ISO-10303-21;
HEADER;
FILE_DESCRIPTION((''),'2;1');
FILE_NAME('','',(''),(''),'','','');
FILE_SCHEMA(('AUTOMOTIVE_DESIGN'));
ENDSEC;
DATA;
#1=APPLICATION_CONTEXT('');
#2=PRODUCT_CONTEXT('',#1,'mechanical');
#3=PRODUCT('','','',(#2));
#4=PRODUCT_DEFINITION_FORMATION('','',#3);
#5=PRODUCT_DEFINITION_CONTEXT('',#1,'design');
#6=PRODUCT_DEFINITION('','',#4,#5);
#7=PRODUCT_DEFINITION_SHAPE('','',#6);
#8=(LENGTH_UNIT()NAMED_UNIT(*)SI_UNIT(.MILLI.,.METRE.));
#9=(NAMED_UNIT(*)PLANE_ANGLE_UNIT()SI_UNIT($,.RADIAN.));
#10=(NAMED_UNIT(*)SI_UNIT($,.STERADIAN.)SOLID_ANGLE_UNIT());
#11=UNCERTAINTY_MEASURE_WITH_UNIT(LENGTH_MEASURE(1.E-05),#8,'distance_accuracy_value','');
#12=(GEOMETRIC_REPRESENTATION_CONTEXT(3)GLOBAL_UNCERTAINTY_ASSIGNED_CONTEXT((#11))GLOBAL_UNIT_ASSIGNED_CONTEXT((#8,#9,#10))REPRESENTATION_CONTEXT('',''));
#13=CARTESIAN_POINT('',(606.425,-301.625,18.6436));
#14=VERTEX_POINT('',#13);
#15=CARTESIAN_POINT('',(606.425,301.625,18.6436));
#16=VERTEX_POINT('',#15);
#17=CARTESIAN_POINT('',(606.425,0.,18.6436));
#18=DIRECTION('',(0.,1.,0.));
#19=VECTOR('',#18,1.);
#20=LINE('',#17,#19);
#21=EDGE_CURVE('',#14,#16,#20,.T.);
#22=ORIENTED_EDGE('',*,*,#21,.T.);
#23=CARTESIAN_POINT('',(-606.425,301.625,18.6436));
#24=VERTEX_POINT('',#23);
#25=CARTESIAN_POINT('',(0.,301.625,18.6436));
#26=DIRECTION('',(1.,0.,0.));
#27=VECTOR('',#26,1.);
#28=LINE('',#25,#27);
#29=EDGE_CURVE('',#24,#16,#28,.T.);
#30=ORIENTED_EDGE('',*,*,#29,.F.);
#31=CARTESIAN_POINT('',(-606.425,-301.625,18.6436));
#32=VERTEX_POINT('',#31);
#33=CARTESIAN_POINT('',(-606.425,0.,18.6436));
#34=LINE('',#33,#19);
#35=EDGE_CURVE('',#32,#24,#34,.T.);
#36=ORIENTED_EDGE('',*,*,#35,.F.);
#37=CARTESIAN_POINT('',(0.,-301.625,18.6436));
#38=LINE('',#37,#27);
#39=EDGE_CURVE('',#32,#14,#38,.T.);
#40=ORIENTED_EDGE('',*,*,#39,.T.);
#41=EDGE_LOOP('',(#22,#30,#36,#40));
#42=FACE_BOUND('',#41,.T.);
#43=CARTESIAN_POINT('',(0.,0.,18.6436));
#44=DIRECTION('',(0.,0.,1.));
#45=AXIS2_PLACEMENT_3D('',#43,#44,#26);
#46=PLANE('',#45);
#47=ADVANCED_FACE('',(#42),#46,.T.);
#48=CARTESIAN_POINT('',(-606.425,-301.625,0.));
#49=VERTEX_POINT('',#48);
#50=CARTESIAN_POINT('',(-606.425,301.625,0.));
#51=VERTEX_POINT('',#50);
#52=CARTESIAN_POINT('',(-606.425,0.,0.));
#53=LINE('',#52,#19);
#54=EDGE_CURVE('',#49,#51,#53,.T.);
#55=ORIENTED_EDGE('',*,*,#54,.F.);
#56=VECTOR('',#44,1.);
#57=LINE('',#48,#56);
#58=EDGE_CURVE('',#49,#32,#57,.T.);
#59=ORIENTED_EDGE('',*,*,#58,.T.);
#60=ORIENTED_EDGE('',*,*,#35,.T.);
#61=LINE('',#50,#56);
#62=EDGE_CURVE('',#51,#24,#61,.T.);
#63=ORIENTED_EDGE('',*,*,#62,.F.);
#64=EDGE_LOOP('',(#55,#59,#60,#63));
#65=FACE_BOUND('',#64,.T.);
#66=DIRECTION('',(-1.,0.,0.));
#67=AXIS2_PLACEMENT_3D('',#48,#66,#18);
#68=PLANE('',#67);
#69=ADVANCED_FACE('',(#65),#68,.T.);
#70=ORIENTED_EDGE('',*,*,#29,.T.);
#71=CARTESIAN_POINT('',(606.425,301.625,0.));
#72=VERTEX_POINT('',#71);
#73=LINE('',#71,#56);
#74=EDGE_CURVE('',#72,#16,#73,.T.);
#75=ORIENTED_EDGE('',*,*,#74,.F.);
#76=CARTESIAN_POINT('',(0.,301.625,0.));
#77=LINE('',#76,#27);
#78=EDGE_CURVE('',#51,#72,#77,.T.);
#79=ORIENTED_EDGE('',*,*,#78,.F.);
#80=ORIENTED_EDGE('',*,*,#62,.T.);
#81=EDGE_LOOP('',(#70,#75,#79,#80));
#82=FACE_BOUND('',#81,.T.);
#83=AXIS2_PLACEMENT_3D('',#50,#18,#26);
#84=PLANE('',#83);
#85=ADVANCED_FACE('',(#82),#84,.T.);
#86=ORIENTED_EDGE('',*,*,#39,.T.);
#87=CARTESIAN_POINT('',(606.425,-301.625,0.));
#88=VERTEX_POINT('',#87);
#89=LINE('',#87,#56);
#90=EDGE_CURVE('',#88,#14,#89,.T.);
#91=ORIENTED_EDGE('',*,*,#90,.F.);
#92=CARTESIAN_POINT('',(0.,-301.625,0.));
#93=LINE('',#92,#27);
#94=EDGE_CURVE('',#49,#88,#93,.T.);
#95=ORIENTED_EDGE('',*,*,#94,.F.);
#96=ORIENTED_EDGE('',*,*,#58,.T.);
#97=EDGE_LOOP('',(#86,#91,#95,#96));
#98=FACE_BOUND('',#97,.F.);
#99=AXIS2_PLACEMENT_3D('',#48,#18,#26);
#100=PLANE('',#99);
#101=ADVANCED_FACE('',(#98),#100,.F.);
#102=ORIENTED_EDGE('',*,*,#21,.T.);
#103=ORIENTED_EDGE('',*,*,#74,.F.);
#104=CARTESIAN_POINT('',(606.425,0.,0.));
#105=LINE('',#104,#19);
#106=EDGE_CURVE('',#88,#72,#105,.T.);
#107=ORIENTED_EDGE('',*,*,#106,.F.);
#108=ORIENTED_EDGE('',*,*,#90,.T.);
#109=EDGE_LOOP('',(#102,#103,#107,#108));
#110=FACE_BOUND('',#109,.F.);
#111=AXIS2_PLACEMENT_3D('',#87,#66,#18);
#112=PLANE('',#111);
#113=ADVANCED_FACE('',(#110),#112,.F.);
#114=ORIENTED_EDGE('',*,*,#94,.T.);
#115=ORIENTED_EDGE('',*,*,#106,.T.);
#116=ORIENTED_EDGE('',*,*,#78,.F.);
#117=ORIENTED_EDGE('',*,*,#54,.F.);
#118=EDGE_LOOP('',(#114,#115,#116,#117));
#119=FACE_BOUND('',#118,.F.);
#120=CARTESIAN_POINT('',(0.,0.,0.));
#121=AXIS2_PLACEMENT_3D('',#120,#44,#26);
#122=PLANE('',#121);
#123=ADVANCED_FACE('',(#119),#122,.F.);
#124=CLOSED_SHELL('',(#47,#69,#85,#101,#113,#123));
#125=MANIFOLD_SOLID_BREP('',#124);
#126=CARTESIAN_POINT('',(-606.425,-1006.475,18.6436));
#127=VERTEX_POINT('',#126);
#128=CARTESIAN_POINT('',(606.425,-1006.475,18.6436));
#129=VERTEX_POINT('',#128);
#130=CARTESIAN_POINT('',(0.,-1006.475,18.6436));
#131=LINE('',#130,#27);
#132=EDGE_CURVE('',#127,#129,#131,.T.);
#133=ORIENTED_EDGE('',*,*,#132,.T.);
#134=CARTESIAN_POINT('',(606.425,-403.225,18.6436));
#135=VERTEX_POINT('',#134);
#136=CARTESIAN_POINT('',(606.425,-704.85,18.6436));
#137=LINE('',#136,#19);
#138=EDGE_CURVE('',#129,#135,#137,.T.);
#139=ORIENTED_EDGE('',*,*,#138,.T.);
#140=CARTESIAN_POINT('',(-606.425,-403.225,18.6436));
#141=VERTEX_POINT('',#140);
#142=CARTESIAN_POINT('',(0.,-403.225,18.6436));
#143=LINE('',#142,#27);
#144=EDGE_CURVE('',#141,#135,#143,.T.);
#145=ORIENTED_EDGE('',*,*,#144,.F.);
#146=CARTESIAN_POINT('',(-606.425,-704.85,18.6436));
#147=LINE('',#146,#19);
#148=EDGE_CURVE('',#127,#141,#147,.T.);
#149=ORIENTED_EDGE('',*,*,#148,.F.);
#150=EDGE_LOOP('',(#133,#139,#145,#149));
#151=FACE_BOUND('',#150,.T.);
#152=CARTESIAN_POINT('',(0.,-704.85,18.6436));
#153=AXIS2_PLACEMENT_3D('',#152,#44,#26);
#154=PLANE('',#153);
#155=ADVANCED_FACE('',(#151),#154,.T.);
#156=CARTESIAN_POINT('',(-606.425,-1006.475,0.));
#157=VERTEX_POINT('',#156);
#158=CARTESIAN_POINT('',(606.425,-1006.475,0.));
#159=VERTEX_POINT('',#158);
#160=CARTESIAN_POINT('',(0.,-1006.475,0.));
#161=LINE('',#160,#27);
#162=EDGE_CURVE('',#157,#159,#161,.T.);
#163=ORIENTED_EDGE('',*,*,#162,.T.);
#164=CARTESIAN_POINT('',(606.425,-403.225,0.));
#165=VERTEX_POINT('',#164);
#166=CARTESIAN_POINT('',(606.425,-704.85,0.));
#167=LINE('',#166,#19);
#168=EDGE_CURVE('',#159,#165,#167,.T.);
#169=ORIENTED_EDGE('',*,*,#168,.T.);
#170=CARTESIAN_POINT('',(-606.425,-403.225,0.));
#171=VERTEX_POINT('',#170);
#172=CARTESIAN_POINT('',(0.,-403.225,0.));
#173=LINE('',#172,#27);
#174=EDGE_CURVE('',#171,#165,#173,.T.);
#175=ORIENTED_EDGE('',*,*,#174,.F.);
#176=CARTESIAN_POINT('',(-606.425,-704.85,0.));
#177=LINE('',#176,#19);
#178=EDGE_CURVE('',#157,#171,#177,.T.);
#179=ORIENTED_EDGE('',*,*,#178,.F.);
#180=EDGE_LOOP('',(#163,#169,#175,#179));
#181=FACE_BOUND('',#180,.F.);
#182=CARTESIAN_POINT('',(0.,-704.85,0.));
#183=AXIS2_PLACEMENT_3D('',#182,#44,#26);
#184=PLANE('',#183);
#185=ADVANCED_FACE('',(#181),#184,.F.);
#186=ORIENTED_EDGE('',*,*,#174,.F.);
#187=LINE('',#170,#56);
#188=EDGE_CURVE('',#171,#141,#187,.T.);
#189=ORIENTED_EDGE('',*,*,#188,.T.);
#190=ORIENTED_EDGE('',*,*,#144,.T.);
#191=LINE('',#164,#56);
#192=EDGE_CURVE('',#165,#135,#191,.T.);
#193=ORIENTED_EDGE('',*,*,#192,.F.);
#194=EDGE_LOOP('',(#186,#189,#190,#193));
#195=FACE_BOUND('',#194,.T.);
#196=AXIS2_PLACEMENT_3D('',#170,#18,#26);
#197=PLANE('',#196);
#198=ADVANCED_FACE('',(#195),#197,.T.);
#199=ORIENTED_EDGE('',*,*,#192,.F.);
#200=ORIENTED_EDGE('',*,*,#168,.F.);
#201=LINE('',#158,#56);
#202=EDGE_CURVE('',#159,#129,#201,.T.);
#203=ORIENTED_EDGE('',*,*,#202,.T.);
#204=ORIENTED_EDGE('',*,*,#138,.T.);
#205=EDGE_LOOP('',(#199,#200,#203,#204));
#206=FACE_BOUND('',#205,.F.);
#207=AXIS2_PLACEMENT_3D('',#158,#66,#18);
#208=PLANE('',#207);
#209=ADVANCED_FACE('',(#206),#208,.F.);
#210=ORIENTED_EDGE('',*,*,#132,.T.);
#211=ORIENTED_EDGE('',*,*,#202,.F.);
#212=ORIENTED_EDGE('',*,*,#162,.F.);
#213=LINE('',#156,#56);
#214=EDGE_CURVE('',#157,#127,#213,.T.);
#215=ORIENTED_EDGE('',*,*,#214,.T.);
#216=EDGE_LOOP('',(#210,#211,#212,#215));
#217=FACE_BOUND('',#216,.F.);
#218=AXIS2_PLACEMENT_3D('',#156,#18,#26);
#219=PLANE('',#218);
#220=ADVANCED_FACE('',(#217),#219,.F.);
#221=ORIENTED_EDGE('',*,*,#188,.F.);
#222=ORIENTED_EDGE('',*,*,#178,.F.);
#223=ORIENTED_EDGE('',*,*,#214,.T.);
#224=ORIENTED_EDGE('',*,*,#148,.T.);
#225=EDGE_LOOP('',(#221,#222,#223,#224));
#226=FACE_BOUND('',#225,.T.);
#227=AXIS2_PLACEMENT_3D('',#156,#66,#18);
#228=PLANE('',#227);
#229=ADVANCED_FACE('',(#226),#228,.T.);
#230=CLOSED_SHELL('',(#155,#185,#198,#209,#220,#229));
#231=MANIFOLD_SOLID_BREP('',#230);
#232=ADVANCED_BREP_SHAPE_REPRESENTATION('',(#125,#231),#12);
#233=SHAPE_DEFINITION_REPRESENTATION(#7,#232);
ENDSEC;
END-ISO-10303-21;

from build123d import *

# Parameters (mm, degrees)
F0_W     = 1212.85
F0_H     = 603.25
F1_DEPTH = 18.6436


# Not quite as in the source:
# - the program builds the solid bodies; features that only make, move or delete a surface that nothing else refers to are left out


with BuildPart() as f1:
    # F0 (on Top) → F1 (new body)
    with BuildSketch(Plane.XY):
        Rectangle(F0_W, F0_H)
    extrude(amount=F1_DEPTH)


with BuildPart() as f1b:
    # F0 (on Top) → F1, piece 2 (new body)
    with BuildSketch(Plane.XY):
        with Locations((0, -704.85)):
            Rectangle(F0_W, F0_H)
    extrude(amount=F1_DEPTH)


solid = Compound([f1.part, f1b.part])
